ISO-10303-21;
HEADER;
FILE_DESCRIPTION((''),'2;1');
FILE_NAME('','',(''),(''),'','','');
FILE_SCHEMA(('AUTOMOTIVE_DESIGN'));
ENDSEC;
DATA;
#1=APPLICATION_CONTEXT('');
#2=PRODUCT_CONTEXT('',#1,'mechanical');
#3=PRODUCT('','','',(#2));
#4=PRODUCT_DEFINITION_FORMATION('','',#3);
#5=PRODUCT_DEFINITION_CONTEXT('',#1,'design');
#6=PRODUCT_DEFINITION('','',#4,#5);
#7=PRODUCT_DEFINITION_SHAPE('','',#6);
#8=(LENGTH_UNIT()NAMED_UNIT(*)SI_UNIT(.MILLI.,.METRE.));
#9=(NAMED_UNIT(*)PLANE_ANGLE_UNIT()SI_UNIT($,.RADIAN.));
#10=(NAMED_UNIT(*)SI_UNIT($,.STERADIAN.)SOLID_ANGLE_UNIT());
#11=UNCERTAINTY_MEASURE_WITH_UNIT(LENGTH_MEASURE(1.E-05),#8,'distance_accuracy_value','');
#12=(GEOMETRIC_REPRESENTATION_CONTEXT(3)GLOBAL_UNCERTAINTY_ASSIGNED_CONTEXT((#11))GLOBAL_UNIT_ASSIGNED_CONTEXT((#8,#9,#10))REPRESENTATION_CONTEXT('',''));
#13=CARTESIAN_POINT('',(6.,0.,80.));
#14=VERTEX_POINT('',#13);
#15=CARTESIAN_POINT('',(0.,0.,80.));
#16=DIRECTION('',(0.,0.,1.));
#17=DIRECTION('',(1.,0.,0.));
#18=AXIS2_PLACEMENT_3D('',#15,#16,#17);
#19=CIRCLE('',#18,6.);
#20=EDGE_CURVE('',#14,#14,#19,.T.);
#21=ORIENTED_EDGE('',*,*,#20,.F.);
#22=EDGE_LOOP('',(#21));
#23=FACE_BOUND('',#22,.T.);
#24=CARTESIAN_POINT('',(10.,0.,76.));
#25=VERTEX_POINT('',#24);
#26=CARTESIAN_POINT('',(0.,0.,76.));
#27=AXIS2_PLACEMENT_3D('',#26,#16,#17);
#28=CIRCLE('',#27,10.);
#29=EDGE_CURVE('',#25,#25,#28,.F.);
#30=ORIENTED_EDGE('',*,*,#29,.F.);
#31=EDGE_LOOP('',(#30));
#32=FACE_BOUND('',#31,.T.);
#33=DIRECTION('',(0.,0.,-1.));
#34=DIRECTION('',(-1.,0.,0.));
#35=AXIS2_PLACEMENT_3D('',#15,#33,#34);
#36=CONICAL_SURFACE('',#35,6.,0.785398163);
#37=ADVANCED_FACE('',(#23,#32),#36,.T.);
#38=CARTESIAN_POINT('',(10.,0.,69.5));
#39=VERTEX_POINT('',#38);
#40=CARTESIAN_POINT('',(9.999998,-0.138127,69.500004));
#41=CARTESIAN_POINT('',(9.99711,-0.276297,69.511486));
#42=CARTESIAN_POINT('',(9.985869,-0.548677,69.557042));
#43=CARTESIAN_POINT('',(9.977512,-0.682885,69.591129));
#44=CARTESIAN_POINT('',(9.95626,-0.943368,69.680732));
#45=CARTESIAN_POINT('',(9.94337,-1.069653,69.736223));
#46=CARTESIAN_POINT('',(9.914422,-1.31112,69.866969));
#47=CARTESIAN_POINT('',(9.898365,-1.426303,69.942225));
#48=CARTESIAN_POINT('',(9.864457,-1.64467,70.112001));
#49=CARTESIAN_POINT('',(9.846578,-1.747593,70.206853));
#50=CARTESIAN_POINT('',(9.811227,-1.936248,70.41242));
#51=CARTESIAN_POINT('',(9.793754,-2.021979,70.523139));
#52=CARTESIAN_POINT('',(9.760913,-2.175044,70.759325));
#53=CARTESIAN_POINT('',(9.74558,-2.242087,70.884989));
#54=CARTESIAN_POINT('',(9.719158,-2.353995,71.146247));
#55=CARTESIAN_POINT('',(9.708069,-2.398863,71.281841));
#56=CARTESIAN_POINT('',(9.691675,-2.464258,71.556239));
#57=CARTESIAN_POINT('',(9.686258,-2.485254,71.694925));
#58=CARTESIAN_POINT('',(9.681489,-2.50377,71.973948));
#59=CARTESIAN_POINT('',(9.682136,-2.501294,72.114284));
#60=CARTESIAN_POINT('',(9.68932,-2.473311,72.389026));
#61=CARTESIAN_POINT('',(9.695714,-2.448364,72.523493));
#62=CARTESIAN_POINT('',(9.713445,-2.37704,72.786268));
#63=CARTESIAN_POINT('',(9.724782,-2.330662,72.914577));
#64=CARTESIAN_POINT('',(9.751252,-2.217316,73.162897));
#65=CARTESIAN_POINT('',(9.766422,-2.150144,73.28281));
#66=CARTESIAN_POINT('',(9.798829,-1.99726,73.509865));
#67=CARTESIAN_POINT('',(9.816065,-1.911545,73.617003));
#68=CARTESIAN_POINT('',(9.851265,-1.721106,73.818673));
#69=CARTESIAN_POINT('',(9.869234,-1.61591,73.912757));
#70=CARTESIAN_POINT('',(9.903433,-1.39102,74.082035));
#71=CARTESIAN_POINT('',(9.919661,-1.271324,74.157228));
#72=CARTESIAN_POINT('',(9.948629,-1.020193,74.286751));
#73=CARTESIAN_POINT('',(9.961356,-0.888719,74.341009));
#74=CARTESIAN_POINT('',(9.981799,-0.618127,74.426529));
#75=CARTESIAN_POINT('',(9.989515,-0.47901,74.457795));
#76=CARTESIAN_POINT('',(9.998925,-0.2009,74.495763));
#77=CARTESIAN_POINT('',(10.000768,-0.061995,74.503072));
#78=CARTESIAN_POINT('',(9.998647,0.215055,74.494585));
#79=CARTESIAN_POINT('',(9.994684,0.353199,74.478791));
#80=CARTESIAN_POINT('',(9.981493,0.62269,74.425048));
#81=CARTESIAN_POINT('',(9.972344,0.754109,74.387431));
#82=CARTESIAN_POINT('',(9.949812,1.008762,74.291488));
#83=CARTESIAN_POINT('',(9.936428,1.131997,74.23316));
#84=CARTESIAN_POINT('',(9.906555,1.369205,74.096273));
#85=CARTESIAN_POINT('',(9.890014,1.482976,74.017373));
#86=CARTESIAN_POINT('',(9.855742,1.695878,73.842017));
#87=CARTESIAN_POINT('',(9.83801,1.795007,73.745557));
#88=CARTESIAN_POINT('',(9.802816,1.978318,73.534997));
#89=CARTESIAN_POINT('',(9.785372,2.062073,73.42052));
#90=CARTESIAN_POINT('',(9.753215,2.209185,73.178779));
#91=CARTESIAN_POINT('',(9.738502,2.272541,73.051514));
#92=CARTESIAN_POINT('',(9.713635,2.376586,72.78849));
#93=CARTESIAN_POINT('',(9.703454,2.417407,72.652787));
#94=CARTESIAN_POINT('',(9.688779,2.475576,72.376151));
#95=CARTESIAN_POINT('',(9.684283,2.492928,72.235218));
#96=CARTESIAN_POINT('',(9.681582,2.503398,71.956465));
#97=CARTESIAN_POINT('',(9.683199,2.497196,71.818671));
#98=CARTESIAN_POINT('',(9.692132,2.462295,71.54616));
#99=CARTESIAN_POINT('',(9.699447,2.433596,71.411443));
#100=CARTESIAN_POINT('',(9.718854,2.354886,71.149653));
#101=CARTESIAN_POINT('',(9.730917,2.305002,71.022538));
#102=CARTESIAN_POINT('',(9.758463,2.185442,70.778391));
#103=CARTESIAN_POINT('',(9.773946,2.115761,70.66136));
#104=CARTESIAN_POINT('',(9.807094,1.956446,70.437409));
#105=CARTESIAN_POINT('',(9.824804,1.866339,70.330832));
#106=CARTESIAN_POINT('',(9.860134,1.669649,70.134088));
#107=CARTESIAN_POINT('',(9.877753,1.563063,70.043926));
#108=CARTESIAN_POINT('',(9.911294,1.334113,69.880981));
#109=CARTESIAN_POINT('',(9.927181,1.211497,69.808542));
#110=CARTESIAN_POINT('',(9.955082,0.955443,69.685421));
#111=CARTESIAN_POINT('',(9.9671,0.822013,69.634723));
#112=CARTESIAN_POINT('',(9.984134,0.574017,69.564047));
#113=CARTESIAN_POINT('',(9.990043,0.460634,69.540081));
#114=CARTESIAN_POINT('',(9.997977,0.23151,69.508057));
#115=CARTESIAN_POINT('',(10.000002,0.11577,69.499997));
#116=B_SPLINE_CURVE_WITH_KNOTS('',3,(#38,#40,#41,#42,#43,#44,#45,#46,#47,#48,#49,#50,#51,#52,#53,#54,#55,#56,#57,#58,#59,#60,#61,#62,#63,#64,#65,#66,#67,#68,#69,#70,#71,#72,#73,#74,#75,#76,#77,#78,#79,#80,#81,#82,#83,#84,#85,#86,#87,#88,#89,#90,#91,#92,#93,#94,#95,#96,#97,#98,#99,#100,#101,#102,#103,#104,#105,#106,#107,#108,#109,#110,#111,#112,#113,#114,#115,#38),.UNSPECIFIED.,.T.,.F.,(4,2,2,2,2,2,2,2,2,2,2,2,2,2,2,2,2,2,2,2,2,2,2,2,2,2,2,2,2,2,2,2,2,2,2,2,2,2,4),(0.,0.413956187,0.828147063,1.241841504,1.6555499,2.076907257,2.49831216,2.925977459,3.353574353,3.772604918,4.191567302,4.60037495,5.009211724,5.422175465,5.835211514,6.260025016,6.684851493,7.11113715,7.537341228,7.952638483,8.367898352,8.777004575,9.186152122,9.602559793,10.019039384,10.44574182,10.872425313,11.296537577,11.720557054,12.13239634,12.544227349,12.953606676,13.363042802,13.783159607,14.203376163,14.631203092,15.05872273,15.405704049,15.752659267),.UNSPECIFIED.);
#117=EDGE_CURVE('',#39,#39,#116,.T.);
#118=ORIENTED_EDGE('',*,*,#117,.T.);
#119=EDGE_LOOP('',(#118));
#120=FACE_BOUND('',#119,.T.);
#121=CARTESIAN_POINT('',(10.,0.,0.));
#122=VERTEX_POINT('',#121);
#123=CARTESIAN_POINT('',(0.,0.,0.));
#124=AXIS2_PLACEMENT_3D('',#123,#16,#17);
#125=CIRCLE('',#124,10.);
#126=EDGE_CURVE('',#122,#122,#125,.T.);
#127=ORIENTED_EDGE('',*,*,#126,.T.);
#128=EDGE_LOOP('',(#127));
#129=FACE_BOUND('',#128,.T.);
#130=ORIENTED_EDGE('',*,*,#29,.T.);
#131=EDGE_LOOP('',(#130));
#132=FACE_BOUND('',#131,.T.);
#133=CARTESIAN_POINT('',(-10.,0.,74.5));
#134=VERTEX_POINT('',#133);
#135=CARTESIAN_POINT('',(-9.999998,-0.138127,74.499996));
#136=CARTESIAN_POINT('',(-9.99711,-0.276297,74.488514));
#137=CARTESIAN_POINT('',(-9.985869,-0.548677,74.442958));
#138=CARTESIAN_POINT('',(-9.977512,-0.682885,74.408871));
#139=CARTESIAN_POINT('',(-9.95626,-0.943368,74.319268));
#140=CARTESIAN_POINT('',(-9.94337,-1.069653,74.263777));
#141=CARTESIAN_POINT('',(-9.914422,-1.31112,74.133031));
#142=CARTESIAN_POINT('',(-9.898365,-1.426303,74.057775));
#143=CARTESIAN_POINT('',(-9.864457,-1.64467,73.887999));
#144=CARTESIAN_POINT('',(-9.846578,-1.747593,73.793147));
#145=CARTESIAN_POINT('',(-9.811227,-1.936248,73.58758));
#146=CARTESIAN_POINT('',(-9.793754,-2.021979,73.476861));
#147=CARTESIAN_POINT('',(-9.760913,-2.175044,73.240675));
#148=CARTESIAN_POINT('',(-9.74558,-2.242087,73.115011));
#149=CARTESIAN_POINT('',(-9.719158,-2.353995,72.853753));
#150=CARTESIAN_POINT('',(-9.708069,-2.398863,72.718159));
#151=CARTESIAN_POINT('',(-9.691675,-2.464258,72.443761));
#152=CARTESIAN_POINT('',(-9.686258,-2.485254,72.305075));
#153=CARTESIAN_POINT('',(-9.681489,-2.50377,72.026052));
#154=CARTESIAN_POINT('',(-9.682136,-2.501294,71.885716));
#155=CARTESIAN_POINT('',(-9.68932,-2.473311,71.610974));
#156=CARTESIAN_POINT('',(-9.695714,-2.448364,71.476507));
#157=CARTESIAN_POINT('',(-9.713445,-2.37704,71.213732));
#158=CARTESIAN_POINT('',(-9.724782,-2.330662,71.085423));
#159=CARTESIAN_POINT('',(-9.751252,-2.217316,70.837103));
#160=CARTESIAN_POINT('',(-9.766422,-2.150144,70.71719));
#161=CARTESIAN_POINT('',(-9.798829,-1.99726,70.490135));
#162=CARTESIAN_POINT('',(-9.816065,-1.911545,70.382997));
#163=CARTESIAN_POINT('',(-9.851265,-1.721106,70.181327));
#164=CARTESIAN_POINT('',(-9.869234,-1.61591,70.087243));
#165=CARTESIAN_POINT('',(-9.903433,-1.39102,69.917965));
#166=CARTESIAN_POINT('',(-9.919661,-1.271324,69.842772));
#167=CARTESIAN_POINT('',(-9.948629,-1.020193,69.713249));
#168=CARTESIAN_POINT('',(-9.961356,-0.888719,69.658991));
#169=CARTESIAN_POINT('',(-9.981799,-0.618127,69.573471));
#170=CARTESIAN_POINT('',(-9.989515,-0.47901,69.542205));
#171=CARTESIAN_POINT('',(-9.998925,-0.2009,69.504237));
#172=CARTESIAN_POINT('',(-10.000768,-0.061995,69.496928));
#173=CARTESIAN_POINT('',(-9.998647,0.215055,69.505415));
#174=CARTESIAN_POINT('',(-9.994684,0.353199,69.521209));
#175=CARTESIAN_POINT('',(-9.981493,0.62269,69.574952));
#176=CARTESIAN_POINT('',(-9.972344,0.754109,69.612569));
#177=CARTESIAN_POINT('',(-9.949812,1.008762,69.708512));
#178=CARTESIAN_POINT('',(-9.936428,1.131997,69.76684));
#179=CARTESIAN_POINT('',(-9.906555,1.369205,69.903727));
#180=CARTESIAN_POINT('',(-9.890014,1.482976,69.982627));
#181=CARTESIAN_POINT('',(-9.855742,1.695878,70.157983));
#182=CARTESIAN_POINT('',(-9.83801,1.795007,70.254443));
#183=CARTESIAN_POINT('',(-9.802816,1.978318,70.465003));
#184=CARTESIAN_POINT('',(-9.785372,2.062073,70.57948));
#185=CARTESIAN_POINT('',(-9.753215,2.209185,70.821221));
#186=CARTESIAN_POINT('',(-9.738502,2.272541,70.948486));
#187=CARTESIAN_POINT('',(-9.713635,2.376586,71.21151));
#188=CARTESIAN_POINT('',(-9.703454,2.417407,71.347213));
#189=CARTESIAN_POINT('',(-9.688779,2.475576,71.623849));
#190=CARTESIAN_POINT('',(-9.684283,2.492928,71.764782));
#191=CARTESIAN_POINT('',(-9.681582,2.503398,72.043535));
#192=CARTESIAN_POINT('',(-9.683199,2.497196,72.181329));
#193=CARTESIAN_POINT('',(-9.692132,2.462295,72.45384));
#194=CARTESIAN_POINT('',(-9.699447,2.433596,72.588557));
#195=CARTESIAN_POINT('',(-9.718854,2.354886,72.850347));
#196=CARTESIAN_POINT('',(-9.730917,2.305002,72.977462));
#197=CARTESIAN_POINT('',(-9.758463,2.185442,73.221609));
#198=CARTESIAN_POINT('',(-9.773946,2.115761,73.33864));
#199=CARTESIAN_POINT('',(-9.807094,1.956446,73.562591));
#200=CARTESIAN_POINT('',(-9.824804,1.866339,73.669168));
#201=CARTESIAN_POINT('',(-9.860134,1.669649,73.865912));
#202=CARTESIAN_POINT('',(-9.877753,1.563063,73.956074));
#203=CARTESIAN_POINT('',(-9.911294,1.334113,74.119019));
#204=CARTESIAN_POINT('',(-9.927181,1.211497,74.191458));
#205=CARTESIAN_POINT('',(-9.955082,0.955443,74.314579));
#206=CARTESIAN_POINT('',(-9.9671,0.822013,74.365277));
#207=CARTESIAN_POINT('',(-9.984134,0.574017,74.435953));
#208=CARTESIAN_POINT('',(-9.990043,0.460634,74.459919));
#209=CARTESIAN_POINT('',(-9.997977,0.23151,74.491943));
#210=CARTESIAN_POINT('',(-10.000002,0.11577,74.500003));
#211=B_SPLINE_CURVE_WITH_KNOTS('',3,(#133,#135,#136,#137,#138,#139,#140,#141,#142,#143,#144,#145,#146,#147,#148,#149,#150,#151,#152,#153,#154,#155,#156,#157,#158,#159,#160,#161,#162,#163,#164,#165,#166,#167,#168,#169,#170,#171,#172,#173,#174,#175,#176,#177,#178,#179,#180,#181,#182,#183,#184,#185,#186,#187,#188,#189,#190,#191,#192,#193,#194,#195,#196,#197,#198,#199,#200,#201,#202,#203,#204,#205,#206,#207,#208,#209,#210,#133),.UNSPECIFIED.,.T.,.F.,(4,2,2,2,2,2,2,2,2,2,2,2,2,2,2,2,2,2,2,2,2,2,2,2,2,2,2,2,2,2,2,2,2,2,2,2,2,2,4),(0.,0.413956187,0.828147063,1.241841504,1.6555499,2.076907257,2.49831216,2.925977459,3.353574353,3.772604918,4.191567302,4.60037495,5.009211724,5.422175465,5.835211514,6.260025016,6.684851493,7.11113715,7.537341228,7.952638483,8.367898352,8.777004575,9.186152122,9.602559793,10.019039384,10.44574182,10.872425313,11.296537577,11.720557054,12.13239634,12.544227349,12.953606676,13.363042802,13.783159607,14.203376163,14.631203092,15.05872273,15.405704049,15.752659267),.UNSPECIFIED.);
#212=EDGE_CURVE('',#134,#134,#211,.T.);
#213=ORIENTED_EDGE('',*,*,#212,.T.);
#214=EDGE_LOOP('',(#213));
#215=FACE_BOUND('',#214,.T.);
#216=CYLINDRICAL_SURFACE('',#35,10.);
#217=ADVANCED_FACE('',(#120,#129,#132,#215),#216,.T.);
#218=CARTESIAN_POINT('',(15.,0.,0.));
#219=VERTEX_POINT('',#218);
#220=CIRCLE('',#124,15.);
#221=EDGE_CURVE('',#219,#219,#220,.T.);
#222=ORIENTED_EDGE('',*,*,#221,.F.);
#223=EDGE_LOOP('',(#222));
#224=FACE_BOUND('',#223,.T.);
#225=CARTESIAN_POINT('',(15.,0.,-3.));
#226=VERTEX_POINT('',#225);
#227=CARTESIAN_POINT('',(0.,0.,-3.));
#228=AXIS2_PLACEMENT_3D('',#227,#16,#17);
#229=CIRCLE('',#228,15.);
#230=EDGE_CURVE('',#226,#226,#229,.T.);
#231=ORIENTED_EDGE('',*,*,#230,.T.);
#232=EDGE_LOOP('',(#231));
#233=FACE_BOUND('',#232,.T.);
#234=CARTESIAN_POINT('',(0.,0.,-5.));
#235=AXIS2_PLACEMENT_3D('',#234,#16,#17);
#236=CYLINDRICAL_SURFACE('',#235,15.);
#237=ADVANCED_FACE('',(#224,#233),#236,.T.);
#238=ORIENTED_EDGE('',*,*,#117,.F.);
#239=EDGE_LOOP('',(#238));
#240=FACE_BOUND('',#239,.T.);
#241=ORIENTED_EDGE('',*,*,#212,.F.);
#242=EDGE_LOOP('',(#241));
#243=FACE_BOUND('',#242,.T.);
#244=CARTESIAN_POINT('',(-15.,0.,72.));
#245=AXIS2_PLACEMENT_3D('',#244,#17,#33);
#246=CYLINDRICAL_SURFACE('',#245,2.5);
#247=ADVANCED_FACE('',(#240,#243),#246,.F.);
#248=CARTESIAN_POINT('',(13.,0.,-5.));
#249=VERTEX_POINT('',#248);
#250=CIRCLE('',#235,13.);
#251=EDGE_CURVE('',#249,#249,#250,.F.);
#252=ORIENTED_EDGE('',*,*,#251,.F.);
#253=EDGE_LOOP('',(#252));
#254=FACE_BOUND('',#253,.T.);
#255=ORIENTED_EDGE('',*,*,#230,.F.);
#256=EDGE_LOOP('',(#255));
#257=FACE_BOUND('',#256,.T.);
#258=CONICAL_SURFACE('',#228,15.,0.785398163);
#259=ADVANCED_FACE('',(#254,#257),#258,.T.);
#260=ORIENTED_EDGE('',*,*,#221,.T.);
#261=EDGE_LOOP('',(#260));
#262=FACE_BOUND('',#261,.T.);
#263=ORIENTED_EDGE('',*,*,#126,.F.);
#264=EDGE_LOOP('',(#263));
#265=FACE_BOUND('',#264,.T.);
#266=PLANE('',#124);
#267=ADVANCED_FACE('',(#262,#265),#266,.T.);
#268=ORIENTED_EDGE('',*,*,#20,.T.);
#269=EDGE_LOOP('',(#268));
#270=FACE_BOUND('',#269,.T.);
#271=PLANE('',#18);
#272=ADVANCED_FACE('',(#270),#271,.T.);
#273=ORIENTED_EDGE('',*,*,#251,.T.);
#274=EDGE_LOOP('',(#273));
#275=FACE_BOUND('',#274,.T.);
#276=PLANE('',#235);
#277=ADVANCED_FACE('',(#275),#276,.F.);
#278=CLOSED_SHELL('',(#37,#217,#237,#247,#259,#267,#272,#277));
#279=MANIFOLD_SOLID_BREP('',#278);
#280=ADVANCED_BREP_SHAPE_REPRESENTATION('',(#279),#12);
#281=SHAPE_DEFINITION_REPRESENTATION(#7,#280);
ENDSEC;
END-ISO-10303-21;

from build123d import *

# Parameters (mm, degrees)
SKETCH1_R               = 15
BASE_EXTRUDE_DEPTH      = 5
CHAMFER1_2_OUTLINE_W    = 10
CHAMFER1_2_OUTLINE_H    = 80
CHAMFER2_SIZE           = 4
CUT_EXTRUDE1_DEPTH      = 74.813887582
CUT_EXTRUDE1_DEPTH_BACK = 74.813887582
SKETCH3_R               = 2.5


with BuildPart() as part:
    # Sketch1 → Base-Extrude (new body)
    with BuildSketch(Plane.XY):
        Circle(SKETCH1_R)
    extrude(amount=-BASE_EXTRUDE_DEPTH)

    # Chamfer1: read off the stored shape, not the designer's step
    # Chamfer1 outline → Chamfer1 (revolve, cut)
    with BuildSketch(Plane.XZ):
        Polygon((15, -3), (13, -5), (15, -5), align=None)
    revolve(axis=Axis((0, 0, 0), (0, 0, 1)), mode=Mode.SUBTRACT)

    # Chamfer1 2 outline → Chamfer1 2 (revolve)
    with BuildSketch(Plane.XZ):
        with Locations((5, 40)):
            Rectangle(CHAMFER1_2_OUTLINE_W, CHAMFER1_2_OUTLINE_H)
    revolve(axis=Axis((0, 0, 0), (0, 0, 1)))

    # Chamfer2
    chamfer2_edges = [part.edges().sort_by_distance(p)[0] for p in [
        (-10, 0, 80),
    ]]
    chamfer(chamfer2_edges, length=CHAMFER2_SIZE)

    # Sketch3 → Cut-Extrude1 (cut, two sides: drawn at the far end of the back side and taken through both)
    with BuildSketch(Plane(origin=(0, 0, 9.3), x_dir=(0, -1, 0), z_dir=(1, 0, 0)).offset(-CUT_EXTRUDE1_DEPTH_BACK)):
        with Locations(Location((0, -62.7, 0), (0, 0, 270))):
            Circle(SKETCH3_R)
    extrude(amount=CUT_EXTRUDE1_DEPTH + CUT_EXTRUDE1_DEPTH_BACK, mode=Mode.SUBTRACT)


solid = part.part
